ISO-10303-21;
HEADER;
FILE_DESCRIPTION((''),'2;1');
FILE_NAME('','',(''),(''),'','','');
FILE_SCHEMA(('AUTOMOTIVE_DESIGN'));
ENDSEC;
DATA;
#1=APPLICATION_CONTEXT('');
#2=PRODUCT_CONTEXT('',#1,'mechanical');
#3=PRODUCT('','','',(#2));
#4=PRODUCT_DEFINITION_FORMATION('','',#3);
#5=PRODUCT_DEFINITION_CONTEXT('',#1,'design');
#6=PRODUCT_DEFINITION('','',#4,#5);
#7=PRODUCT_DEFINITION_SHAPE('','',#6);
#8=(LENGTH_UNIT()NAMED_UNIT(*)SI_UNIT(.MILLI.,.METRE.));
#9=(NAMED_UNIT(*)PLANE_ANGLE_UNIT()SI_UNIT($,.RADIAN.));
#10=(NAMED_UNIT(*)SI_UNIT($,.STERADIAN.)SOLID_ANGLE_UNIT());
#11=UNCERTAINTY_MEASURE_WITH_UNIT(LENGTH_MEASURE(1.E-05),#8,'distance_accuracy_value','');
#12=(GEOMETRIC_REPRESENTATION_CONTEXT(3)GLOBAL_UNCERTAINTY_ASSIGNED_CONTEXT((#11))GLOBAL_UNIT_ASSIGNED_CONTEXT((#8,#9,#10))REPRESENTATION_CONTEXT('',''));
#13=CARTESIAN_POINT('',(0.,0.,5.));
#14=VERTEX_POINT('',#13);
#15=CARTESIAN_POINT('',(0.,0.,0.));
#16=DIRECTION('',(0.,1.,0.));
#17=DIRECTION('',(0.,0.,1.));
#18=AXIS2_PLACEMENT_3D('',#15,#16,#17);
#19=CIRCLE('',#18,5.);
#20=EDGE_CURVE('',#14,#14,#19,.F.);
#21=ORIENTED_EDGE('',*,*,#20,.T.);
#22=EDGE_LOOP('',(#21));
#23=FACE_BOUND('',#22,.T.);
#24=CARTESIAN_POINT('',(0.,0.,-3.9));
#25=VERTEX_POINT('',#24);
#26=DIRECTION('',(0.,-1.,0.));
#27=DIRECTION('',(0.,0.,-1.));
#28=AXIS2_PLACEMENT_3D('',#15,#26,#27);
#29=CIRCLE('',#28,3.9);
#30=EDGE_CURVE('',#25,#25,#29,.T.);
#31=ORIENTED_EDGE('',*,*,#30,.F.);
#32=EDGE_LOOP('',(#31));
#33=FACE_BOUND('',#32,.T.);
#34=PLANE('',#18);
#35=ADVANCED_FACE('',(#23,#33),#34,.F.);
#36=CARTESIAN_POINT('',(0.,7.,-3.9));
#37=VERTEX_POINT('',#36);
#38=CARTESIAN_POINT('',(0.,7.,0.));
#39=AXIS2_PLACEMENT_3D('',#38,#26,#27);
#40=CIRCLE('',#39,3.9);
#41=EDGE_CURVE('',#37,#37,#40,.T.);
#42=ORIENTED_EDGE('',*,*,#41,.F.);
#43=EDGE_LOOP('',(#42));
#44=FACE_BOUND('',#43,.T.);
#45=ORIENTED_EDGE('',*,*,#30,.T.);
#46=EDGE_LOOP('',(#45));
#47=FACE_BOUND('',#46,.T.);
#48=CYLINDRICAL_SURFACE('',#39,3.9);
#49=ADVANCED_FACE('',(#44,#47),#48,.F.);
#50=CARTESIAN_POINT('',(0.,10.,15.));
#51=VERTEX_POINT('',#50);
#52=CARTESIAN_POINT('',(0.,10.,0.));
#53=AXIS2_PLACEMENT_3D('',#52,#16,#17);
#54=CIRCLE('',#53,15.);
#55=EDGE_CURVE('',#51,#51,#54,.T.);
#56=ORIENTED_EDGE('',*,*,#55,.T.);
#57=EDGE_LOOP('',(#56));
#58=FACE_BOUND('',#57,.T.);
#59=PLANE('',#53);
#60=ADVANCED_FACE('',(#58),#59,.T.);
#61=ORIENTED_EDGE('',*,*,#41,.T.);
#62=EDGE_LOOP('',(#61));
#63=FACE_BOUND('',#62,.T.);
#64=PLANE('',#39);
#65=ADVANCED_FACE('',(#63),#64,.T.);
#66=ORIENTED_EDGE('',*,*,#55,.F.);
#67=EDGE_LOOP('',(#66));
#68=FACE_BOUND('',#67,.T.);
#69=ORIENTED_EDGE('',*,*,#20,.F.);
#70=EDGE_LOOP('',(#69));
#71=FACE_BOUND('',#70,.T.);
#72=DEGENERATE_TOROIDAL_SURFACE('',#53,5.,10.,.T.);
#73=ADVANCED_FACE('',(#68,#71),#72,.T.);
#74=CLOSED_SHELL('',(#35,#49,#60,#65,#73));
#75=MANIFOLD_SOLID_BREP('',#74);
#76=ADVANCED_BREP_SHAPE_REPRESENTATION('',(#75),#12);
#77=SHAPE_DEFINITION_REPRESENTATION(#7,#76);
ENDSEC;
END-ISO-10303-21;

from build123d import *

# Parameters (mm, degrees)
SKETCH1_R           = 15
BOSS_EXTRUDE1_DEPTH = 10
SKETCH2_R           = 3.9
CUT_EXTRUDE1_DEPTH  = 7
FILLET1_R           = 10


with BuildPart() as part:
    # Sketch1 → Boss-Extrude1 (new body)
    with BuildSketch(Plane(origin=(0, 0, 0), x_dir=(1, 0, 0), z_dir=(0, 1, 0))):
        with Locations(Location((0, 0, 0), (0, 0, 270))):
            Circle(SKETCH1_R)
    extrude(amount=BOSS_EXTRUDE1_DEPTH)

    # Sketch2 → Cut-Extrude1 (cut)
    with BuildSketch(Plane.XZ):
        with Locations(Location((0, 0, 0), (0, 0, 270))):
            Circle(SKETCH2_R)
    extrude(amount=-CUT_EXTRUDE1_DEPTH, mode=Mode.SUBTRACT)

    # Fillet1
    fillet1_edges = [part.edges().sort_by_distance(p)[0] for p in [
        (0, 0, -15),
    ]]
    fillet(fillet1_edges, radius=FILLET1_R - 0.0001)  # a hair under: the kernel refuses the full size


solid = part.part
